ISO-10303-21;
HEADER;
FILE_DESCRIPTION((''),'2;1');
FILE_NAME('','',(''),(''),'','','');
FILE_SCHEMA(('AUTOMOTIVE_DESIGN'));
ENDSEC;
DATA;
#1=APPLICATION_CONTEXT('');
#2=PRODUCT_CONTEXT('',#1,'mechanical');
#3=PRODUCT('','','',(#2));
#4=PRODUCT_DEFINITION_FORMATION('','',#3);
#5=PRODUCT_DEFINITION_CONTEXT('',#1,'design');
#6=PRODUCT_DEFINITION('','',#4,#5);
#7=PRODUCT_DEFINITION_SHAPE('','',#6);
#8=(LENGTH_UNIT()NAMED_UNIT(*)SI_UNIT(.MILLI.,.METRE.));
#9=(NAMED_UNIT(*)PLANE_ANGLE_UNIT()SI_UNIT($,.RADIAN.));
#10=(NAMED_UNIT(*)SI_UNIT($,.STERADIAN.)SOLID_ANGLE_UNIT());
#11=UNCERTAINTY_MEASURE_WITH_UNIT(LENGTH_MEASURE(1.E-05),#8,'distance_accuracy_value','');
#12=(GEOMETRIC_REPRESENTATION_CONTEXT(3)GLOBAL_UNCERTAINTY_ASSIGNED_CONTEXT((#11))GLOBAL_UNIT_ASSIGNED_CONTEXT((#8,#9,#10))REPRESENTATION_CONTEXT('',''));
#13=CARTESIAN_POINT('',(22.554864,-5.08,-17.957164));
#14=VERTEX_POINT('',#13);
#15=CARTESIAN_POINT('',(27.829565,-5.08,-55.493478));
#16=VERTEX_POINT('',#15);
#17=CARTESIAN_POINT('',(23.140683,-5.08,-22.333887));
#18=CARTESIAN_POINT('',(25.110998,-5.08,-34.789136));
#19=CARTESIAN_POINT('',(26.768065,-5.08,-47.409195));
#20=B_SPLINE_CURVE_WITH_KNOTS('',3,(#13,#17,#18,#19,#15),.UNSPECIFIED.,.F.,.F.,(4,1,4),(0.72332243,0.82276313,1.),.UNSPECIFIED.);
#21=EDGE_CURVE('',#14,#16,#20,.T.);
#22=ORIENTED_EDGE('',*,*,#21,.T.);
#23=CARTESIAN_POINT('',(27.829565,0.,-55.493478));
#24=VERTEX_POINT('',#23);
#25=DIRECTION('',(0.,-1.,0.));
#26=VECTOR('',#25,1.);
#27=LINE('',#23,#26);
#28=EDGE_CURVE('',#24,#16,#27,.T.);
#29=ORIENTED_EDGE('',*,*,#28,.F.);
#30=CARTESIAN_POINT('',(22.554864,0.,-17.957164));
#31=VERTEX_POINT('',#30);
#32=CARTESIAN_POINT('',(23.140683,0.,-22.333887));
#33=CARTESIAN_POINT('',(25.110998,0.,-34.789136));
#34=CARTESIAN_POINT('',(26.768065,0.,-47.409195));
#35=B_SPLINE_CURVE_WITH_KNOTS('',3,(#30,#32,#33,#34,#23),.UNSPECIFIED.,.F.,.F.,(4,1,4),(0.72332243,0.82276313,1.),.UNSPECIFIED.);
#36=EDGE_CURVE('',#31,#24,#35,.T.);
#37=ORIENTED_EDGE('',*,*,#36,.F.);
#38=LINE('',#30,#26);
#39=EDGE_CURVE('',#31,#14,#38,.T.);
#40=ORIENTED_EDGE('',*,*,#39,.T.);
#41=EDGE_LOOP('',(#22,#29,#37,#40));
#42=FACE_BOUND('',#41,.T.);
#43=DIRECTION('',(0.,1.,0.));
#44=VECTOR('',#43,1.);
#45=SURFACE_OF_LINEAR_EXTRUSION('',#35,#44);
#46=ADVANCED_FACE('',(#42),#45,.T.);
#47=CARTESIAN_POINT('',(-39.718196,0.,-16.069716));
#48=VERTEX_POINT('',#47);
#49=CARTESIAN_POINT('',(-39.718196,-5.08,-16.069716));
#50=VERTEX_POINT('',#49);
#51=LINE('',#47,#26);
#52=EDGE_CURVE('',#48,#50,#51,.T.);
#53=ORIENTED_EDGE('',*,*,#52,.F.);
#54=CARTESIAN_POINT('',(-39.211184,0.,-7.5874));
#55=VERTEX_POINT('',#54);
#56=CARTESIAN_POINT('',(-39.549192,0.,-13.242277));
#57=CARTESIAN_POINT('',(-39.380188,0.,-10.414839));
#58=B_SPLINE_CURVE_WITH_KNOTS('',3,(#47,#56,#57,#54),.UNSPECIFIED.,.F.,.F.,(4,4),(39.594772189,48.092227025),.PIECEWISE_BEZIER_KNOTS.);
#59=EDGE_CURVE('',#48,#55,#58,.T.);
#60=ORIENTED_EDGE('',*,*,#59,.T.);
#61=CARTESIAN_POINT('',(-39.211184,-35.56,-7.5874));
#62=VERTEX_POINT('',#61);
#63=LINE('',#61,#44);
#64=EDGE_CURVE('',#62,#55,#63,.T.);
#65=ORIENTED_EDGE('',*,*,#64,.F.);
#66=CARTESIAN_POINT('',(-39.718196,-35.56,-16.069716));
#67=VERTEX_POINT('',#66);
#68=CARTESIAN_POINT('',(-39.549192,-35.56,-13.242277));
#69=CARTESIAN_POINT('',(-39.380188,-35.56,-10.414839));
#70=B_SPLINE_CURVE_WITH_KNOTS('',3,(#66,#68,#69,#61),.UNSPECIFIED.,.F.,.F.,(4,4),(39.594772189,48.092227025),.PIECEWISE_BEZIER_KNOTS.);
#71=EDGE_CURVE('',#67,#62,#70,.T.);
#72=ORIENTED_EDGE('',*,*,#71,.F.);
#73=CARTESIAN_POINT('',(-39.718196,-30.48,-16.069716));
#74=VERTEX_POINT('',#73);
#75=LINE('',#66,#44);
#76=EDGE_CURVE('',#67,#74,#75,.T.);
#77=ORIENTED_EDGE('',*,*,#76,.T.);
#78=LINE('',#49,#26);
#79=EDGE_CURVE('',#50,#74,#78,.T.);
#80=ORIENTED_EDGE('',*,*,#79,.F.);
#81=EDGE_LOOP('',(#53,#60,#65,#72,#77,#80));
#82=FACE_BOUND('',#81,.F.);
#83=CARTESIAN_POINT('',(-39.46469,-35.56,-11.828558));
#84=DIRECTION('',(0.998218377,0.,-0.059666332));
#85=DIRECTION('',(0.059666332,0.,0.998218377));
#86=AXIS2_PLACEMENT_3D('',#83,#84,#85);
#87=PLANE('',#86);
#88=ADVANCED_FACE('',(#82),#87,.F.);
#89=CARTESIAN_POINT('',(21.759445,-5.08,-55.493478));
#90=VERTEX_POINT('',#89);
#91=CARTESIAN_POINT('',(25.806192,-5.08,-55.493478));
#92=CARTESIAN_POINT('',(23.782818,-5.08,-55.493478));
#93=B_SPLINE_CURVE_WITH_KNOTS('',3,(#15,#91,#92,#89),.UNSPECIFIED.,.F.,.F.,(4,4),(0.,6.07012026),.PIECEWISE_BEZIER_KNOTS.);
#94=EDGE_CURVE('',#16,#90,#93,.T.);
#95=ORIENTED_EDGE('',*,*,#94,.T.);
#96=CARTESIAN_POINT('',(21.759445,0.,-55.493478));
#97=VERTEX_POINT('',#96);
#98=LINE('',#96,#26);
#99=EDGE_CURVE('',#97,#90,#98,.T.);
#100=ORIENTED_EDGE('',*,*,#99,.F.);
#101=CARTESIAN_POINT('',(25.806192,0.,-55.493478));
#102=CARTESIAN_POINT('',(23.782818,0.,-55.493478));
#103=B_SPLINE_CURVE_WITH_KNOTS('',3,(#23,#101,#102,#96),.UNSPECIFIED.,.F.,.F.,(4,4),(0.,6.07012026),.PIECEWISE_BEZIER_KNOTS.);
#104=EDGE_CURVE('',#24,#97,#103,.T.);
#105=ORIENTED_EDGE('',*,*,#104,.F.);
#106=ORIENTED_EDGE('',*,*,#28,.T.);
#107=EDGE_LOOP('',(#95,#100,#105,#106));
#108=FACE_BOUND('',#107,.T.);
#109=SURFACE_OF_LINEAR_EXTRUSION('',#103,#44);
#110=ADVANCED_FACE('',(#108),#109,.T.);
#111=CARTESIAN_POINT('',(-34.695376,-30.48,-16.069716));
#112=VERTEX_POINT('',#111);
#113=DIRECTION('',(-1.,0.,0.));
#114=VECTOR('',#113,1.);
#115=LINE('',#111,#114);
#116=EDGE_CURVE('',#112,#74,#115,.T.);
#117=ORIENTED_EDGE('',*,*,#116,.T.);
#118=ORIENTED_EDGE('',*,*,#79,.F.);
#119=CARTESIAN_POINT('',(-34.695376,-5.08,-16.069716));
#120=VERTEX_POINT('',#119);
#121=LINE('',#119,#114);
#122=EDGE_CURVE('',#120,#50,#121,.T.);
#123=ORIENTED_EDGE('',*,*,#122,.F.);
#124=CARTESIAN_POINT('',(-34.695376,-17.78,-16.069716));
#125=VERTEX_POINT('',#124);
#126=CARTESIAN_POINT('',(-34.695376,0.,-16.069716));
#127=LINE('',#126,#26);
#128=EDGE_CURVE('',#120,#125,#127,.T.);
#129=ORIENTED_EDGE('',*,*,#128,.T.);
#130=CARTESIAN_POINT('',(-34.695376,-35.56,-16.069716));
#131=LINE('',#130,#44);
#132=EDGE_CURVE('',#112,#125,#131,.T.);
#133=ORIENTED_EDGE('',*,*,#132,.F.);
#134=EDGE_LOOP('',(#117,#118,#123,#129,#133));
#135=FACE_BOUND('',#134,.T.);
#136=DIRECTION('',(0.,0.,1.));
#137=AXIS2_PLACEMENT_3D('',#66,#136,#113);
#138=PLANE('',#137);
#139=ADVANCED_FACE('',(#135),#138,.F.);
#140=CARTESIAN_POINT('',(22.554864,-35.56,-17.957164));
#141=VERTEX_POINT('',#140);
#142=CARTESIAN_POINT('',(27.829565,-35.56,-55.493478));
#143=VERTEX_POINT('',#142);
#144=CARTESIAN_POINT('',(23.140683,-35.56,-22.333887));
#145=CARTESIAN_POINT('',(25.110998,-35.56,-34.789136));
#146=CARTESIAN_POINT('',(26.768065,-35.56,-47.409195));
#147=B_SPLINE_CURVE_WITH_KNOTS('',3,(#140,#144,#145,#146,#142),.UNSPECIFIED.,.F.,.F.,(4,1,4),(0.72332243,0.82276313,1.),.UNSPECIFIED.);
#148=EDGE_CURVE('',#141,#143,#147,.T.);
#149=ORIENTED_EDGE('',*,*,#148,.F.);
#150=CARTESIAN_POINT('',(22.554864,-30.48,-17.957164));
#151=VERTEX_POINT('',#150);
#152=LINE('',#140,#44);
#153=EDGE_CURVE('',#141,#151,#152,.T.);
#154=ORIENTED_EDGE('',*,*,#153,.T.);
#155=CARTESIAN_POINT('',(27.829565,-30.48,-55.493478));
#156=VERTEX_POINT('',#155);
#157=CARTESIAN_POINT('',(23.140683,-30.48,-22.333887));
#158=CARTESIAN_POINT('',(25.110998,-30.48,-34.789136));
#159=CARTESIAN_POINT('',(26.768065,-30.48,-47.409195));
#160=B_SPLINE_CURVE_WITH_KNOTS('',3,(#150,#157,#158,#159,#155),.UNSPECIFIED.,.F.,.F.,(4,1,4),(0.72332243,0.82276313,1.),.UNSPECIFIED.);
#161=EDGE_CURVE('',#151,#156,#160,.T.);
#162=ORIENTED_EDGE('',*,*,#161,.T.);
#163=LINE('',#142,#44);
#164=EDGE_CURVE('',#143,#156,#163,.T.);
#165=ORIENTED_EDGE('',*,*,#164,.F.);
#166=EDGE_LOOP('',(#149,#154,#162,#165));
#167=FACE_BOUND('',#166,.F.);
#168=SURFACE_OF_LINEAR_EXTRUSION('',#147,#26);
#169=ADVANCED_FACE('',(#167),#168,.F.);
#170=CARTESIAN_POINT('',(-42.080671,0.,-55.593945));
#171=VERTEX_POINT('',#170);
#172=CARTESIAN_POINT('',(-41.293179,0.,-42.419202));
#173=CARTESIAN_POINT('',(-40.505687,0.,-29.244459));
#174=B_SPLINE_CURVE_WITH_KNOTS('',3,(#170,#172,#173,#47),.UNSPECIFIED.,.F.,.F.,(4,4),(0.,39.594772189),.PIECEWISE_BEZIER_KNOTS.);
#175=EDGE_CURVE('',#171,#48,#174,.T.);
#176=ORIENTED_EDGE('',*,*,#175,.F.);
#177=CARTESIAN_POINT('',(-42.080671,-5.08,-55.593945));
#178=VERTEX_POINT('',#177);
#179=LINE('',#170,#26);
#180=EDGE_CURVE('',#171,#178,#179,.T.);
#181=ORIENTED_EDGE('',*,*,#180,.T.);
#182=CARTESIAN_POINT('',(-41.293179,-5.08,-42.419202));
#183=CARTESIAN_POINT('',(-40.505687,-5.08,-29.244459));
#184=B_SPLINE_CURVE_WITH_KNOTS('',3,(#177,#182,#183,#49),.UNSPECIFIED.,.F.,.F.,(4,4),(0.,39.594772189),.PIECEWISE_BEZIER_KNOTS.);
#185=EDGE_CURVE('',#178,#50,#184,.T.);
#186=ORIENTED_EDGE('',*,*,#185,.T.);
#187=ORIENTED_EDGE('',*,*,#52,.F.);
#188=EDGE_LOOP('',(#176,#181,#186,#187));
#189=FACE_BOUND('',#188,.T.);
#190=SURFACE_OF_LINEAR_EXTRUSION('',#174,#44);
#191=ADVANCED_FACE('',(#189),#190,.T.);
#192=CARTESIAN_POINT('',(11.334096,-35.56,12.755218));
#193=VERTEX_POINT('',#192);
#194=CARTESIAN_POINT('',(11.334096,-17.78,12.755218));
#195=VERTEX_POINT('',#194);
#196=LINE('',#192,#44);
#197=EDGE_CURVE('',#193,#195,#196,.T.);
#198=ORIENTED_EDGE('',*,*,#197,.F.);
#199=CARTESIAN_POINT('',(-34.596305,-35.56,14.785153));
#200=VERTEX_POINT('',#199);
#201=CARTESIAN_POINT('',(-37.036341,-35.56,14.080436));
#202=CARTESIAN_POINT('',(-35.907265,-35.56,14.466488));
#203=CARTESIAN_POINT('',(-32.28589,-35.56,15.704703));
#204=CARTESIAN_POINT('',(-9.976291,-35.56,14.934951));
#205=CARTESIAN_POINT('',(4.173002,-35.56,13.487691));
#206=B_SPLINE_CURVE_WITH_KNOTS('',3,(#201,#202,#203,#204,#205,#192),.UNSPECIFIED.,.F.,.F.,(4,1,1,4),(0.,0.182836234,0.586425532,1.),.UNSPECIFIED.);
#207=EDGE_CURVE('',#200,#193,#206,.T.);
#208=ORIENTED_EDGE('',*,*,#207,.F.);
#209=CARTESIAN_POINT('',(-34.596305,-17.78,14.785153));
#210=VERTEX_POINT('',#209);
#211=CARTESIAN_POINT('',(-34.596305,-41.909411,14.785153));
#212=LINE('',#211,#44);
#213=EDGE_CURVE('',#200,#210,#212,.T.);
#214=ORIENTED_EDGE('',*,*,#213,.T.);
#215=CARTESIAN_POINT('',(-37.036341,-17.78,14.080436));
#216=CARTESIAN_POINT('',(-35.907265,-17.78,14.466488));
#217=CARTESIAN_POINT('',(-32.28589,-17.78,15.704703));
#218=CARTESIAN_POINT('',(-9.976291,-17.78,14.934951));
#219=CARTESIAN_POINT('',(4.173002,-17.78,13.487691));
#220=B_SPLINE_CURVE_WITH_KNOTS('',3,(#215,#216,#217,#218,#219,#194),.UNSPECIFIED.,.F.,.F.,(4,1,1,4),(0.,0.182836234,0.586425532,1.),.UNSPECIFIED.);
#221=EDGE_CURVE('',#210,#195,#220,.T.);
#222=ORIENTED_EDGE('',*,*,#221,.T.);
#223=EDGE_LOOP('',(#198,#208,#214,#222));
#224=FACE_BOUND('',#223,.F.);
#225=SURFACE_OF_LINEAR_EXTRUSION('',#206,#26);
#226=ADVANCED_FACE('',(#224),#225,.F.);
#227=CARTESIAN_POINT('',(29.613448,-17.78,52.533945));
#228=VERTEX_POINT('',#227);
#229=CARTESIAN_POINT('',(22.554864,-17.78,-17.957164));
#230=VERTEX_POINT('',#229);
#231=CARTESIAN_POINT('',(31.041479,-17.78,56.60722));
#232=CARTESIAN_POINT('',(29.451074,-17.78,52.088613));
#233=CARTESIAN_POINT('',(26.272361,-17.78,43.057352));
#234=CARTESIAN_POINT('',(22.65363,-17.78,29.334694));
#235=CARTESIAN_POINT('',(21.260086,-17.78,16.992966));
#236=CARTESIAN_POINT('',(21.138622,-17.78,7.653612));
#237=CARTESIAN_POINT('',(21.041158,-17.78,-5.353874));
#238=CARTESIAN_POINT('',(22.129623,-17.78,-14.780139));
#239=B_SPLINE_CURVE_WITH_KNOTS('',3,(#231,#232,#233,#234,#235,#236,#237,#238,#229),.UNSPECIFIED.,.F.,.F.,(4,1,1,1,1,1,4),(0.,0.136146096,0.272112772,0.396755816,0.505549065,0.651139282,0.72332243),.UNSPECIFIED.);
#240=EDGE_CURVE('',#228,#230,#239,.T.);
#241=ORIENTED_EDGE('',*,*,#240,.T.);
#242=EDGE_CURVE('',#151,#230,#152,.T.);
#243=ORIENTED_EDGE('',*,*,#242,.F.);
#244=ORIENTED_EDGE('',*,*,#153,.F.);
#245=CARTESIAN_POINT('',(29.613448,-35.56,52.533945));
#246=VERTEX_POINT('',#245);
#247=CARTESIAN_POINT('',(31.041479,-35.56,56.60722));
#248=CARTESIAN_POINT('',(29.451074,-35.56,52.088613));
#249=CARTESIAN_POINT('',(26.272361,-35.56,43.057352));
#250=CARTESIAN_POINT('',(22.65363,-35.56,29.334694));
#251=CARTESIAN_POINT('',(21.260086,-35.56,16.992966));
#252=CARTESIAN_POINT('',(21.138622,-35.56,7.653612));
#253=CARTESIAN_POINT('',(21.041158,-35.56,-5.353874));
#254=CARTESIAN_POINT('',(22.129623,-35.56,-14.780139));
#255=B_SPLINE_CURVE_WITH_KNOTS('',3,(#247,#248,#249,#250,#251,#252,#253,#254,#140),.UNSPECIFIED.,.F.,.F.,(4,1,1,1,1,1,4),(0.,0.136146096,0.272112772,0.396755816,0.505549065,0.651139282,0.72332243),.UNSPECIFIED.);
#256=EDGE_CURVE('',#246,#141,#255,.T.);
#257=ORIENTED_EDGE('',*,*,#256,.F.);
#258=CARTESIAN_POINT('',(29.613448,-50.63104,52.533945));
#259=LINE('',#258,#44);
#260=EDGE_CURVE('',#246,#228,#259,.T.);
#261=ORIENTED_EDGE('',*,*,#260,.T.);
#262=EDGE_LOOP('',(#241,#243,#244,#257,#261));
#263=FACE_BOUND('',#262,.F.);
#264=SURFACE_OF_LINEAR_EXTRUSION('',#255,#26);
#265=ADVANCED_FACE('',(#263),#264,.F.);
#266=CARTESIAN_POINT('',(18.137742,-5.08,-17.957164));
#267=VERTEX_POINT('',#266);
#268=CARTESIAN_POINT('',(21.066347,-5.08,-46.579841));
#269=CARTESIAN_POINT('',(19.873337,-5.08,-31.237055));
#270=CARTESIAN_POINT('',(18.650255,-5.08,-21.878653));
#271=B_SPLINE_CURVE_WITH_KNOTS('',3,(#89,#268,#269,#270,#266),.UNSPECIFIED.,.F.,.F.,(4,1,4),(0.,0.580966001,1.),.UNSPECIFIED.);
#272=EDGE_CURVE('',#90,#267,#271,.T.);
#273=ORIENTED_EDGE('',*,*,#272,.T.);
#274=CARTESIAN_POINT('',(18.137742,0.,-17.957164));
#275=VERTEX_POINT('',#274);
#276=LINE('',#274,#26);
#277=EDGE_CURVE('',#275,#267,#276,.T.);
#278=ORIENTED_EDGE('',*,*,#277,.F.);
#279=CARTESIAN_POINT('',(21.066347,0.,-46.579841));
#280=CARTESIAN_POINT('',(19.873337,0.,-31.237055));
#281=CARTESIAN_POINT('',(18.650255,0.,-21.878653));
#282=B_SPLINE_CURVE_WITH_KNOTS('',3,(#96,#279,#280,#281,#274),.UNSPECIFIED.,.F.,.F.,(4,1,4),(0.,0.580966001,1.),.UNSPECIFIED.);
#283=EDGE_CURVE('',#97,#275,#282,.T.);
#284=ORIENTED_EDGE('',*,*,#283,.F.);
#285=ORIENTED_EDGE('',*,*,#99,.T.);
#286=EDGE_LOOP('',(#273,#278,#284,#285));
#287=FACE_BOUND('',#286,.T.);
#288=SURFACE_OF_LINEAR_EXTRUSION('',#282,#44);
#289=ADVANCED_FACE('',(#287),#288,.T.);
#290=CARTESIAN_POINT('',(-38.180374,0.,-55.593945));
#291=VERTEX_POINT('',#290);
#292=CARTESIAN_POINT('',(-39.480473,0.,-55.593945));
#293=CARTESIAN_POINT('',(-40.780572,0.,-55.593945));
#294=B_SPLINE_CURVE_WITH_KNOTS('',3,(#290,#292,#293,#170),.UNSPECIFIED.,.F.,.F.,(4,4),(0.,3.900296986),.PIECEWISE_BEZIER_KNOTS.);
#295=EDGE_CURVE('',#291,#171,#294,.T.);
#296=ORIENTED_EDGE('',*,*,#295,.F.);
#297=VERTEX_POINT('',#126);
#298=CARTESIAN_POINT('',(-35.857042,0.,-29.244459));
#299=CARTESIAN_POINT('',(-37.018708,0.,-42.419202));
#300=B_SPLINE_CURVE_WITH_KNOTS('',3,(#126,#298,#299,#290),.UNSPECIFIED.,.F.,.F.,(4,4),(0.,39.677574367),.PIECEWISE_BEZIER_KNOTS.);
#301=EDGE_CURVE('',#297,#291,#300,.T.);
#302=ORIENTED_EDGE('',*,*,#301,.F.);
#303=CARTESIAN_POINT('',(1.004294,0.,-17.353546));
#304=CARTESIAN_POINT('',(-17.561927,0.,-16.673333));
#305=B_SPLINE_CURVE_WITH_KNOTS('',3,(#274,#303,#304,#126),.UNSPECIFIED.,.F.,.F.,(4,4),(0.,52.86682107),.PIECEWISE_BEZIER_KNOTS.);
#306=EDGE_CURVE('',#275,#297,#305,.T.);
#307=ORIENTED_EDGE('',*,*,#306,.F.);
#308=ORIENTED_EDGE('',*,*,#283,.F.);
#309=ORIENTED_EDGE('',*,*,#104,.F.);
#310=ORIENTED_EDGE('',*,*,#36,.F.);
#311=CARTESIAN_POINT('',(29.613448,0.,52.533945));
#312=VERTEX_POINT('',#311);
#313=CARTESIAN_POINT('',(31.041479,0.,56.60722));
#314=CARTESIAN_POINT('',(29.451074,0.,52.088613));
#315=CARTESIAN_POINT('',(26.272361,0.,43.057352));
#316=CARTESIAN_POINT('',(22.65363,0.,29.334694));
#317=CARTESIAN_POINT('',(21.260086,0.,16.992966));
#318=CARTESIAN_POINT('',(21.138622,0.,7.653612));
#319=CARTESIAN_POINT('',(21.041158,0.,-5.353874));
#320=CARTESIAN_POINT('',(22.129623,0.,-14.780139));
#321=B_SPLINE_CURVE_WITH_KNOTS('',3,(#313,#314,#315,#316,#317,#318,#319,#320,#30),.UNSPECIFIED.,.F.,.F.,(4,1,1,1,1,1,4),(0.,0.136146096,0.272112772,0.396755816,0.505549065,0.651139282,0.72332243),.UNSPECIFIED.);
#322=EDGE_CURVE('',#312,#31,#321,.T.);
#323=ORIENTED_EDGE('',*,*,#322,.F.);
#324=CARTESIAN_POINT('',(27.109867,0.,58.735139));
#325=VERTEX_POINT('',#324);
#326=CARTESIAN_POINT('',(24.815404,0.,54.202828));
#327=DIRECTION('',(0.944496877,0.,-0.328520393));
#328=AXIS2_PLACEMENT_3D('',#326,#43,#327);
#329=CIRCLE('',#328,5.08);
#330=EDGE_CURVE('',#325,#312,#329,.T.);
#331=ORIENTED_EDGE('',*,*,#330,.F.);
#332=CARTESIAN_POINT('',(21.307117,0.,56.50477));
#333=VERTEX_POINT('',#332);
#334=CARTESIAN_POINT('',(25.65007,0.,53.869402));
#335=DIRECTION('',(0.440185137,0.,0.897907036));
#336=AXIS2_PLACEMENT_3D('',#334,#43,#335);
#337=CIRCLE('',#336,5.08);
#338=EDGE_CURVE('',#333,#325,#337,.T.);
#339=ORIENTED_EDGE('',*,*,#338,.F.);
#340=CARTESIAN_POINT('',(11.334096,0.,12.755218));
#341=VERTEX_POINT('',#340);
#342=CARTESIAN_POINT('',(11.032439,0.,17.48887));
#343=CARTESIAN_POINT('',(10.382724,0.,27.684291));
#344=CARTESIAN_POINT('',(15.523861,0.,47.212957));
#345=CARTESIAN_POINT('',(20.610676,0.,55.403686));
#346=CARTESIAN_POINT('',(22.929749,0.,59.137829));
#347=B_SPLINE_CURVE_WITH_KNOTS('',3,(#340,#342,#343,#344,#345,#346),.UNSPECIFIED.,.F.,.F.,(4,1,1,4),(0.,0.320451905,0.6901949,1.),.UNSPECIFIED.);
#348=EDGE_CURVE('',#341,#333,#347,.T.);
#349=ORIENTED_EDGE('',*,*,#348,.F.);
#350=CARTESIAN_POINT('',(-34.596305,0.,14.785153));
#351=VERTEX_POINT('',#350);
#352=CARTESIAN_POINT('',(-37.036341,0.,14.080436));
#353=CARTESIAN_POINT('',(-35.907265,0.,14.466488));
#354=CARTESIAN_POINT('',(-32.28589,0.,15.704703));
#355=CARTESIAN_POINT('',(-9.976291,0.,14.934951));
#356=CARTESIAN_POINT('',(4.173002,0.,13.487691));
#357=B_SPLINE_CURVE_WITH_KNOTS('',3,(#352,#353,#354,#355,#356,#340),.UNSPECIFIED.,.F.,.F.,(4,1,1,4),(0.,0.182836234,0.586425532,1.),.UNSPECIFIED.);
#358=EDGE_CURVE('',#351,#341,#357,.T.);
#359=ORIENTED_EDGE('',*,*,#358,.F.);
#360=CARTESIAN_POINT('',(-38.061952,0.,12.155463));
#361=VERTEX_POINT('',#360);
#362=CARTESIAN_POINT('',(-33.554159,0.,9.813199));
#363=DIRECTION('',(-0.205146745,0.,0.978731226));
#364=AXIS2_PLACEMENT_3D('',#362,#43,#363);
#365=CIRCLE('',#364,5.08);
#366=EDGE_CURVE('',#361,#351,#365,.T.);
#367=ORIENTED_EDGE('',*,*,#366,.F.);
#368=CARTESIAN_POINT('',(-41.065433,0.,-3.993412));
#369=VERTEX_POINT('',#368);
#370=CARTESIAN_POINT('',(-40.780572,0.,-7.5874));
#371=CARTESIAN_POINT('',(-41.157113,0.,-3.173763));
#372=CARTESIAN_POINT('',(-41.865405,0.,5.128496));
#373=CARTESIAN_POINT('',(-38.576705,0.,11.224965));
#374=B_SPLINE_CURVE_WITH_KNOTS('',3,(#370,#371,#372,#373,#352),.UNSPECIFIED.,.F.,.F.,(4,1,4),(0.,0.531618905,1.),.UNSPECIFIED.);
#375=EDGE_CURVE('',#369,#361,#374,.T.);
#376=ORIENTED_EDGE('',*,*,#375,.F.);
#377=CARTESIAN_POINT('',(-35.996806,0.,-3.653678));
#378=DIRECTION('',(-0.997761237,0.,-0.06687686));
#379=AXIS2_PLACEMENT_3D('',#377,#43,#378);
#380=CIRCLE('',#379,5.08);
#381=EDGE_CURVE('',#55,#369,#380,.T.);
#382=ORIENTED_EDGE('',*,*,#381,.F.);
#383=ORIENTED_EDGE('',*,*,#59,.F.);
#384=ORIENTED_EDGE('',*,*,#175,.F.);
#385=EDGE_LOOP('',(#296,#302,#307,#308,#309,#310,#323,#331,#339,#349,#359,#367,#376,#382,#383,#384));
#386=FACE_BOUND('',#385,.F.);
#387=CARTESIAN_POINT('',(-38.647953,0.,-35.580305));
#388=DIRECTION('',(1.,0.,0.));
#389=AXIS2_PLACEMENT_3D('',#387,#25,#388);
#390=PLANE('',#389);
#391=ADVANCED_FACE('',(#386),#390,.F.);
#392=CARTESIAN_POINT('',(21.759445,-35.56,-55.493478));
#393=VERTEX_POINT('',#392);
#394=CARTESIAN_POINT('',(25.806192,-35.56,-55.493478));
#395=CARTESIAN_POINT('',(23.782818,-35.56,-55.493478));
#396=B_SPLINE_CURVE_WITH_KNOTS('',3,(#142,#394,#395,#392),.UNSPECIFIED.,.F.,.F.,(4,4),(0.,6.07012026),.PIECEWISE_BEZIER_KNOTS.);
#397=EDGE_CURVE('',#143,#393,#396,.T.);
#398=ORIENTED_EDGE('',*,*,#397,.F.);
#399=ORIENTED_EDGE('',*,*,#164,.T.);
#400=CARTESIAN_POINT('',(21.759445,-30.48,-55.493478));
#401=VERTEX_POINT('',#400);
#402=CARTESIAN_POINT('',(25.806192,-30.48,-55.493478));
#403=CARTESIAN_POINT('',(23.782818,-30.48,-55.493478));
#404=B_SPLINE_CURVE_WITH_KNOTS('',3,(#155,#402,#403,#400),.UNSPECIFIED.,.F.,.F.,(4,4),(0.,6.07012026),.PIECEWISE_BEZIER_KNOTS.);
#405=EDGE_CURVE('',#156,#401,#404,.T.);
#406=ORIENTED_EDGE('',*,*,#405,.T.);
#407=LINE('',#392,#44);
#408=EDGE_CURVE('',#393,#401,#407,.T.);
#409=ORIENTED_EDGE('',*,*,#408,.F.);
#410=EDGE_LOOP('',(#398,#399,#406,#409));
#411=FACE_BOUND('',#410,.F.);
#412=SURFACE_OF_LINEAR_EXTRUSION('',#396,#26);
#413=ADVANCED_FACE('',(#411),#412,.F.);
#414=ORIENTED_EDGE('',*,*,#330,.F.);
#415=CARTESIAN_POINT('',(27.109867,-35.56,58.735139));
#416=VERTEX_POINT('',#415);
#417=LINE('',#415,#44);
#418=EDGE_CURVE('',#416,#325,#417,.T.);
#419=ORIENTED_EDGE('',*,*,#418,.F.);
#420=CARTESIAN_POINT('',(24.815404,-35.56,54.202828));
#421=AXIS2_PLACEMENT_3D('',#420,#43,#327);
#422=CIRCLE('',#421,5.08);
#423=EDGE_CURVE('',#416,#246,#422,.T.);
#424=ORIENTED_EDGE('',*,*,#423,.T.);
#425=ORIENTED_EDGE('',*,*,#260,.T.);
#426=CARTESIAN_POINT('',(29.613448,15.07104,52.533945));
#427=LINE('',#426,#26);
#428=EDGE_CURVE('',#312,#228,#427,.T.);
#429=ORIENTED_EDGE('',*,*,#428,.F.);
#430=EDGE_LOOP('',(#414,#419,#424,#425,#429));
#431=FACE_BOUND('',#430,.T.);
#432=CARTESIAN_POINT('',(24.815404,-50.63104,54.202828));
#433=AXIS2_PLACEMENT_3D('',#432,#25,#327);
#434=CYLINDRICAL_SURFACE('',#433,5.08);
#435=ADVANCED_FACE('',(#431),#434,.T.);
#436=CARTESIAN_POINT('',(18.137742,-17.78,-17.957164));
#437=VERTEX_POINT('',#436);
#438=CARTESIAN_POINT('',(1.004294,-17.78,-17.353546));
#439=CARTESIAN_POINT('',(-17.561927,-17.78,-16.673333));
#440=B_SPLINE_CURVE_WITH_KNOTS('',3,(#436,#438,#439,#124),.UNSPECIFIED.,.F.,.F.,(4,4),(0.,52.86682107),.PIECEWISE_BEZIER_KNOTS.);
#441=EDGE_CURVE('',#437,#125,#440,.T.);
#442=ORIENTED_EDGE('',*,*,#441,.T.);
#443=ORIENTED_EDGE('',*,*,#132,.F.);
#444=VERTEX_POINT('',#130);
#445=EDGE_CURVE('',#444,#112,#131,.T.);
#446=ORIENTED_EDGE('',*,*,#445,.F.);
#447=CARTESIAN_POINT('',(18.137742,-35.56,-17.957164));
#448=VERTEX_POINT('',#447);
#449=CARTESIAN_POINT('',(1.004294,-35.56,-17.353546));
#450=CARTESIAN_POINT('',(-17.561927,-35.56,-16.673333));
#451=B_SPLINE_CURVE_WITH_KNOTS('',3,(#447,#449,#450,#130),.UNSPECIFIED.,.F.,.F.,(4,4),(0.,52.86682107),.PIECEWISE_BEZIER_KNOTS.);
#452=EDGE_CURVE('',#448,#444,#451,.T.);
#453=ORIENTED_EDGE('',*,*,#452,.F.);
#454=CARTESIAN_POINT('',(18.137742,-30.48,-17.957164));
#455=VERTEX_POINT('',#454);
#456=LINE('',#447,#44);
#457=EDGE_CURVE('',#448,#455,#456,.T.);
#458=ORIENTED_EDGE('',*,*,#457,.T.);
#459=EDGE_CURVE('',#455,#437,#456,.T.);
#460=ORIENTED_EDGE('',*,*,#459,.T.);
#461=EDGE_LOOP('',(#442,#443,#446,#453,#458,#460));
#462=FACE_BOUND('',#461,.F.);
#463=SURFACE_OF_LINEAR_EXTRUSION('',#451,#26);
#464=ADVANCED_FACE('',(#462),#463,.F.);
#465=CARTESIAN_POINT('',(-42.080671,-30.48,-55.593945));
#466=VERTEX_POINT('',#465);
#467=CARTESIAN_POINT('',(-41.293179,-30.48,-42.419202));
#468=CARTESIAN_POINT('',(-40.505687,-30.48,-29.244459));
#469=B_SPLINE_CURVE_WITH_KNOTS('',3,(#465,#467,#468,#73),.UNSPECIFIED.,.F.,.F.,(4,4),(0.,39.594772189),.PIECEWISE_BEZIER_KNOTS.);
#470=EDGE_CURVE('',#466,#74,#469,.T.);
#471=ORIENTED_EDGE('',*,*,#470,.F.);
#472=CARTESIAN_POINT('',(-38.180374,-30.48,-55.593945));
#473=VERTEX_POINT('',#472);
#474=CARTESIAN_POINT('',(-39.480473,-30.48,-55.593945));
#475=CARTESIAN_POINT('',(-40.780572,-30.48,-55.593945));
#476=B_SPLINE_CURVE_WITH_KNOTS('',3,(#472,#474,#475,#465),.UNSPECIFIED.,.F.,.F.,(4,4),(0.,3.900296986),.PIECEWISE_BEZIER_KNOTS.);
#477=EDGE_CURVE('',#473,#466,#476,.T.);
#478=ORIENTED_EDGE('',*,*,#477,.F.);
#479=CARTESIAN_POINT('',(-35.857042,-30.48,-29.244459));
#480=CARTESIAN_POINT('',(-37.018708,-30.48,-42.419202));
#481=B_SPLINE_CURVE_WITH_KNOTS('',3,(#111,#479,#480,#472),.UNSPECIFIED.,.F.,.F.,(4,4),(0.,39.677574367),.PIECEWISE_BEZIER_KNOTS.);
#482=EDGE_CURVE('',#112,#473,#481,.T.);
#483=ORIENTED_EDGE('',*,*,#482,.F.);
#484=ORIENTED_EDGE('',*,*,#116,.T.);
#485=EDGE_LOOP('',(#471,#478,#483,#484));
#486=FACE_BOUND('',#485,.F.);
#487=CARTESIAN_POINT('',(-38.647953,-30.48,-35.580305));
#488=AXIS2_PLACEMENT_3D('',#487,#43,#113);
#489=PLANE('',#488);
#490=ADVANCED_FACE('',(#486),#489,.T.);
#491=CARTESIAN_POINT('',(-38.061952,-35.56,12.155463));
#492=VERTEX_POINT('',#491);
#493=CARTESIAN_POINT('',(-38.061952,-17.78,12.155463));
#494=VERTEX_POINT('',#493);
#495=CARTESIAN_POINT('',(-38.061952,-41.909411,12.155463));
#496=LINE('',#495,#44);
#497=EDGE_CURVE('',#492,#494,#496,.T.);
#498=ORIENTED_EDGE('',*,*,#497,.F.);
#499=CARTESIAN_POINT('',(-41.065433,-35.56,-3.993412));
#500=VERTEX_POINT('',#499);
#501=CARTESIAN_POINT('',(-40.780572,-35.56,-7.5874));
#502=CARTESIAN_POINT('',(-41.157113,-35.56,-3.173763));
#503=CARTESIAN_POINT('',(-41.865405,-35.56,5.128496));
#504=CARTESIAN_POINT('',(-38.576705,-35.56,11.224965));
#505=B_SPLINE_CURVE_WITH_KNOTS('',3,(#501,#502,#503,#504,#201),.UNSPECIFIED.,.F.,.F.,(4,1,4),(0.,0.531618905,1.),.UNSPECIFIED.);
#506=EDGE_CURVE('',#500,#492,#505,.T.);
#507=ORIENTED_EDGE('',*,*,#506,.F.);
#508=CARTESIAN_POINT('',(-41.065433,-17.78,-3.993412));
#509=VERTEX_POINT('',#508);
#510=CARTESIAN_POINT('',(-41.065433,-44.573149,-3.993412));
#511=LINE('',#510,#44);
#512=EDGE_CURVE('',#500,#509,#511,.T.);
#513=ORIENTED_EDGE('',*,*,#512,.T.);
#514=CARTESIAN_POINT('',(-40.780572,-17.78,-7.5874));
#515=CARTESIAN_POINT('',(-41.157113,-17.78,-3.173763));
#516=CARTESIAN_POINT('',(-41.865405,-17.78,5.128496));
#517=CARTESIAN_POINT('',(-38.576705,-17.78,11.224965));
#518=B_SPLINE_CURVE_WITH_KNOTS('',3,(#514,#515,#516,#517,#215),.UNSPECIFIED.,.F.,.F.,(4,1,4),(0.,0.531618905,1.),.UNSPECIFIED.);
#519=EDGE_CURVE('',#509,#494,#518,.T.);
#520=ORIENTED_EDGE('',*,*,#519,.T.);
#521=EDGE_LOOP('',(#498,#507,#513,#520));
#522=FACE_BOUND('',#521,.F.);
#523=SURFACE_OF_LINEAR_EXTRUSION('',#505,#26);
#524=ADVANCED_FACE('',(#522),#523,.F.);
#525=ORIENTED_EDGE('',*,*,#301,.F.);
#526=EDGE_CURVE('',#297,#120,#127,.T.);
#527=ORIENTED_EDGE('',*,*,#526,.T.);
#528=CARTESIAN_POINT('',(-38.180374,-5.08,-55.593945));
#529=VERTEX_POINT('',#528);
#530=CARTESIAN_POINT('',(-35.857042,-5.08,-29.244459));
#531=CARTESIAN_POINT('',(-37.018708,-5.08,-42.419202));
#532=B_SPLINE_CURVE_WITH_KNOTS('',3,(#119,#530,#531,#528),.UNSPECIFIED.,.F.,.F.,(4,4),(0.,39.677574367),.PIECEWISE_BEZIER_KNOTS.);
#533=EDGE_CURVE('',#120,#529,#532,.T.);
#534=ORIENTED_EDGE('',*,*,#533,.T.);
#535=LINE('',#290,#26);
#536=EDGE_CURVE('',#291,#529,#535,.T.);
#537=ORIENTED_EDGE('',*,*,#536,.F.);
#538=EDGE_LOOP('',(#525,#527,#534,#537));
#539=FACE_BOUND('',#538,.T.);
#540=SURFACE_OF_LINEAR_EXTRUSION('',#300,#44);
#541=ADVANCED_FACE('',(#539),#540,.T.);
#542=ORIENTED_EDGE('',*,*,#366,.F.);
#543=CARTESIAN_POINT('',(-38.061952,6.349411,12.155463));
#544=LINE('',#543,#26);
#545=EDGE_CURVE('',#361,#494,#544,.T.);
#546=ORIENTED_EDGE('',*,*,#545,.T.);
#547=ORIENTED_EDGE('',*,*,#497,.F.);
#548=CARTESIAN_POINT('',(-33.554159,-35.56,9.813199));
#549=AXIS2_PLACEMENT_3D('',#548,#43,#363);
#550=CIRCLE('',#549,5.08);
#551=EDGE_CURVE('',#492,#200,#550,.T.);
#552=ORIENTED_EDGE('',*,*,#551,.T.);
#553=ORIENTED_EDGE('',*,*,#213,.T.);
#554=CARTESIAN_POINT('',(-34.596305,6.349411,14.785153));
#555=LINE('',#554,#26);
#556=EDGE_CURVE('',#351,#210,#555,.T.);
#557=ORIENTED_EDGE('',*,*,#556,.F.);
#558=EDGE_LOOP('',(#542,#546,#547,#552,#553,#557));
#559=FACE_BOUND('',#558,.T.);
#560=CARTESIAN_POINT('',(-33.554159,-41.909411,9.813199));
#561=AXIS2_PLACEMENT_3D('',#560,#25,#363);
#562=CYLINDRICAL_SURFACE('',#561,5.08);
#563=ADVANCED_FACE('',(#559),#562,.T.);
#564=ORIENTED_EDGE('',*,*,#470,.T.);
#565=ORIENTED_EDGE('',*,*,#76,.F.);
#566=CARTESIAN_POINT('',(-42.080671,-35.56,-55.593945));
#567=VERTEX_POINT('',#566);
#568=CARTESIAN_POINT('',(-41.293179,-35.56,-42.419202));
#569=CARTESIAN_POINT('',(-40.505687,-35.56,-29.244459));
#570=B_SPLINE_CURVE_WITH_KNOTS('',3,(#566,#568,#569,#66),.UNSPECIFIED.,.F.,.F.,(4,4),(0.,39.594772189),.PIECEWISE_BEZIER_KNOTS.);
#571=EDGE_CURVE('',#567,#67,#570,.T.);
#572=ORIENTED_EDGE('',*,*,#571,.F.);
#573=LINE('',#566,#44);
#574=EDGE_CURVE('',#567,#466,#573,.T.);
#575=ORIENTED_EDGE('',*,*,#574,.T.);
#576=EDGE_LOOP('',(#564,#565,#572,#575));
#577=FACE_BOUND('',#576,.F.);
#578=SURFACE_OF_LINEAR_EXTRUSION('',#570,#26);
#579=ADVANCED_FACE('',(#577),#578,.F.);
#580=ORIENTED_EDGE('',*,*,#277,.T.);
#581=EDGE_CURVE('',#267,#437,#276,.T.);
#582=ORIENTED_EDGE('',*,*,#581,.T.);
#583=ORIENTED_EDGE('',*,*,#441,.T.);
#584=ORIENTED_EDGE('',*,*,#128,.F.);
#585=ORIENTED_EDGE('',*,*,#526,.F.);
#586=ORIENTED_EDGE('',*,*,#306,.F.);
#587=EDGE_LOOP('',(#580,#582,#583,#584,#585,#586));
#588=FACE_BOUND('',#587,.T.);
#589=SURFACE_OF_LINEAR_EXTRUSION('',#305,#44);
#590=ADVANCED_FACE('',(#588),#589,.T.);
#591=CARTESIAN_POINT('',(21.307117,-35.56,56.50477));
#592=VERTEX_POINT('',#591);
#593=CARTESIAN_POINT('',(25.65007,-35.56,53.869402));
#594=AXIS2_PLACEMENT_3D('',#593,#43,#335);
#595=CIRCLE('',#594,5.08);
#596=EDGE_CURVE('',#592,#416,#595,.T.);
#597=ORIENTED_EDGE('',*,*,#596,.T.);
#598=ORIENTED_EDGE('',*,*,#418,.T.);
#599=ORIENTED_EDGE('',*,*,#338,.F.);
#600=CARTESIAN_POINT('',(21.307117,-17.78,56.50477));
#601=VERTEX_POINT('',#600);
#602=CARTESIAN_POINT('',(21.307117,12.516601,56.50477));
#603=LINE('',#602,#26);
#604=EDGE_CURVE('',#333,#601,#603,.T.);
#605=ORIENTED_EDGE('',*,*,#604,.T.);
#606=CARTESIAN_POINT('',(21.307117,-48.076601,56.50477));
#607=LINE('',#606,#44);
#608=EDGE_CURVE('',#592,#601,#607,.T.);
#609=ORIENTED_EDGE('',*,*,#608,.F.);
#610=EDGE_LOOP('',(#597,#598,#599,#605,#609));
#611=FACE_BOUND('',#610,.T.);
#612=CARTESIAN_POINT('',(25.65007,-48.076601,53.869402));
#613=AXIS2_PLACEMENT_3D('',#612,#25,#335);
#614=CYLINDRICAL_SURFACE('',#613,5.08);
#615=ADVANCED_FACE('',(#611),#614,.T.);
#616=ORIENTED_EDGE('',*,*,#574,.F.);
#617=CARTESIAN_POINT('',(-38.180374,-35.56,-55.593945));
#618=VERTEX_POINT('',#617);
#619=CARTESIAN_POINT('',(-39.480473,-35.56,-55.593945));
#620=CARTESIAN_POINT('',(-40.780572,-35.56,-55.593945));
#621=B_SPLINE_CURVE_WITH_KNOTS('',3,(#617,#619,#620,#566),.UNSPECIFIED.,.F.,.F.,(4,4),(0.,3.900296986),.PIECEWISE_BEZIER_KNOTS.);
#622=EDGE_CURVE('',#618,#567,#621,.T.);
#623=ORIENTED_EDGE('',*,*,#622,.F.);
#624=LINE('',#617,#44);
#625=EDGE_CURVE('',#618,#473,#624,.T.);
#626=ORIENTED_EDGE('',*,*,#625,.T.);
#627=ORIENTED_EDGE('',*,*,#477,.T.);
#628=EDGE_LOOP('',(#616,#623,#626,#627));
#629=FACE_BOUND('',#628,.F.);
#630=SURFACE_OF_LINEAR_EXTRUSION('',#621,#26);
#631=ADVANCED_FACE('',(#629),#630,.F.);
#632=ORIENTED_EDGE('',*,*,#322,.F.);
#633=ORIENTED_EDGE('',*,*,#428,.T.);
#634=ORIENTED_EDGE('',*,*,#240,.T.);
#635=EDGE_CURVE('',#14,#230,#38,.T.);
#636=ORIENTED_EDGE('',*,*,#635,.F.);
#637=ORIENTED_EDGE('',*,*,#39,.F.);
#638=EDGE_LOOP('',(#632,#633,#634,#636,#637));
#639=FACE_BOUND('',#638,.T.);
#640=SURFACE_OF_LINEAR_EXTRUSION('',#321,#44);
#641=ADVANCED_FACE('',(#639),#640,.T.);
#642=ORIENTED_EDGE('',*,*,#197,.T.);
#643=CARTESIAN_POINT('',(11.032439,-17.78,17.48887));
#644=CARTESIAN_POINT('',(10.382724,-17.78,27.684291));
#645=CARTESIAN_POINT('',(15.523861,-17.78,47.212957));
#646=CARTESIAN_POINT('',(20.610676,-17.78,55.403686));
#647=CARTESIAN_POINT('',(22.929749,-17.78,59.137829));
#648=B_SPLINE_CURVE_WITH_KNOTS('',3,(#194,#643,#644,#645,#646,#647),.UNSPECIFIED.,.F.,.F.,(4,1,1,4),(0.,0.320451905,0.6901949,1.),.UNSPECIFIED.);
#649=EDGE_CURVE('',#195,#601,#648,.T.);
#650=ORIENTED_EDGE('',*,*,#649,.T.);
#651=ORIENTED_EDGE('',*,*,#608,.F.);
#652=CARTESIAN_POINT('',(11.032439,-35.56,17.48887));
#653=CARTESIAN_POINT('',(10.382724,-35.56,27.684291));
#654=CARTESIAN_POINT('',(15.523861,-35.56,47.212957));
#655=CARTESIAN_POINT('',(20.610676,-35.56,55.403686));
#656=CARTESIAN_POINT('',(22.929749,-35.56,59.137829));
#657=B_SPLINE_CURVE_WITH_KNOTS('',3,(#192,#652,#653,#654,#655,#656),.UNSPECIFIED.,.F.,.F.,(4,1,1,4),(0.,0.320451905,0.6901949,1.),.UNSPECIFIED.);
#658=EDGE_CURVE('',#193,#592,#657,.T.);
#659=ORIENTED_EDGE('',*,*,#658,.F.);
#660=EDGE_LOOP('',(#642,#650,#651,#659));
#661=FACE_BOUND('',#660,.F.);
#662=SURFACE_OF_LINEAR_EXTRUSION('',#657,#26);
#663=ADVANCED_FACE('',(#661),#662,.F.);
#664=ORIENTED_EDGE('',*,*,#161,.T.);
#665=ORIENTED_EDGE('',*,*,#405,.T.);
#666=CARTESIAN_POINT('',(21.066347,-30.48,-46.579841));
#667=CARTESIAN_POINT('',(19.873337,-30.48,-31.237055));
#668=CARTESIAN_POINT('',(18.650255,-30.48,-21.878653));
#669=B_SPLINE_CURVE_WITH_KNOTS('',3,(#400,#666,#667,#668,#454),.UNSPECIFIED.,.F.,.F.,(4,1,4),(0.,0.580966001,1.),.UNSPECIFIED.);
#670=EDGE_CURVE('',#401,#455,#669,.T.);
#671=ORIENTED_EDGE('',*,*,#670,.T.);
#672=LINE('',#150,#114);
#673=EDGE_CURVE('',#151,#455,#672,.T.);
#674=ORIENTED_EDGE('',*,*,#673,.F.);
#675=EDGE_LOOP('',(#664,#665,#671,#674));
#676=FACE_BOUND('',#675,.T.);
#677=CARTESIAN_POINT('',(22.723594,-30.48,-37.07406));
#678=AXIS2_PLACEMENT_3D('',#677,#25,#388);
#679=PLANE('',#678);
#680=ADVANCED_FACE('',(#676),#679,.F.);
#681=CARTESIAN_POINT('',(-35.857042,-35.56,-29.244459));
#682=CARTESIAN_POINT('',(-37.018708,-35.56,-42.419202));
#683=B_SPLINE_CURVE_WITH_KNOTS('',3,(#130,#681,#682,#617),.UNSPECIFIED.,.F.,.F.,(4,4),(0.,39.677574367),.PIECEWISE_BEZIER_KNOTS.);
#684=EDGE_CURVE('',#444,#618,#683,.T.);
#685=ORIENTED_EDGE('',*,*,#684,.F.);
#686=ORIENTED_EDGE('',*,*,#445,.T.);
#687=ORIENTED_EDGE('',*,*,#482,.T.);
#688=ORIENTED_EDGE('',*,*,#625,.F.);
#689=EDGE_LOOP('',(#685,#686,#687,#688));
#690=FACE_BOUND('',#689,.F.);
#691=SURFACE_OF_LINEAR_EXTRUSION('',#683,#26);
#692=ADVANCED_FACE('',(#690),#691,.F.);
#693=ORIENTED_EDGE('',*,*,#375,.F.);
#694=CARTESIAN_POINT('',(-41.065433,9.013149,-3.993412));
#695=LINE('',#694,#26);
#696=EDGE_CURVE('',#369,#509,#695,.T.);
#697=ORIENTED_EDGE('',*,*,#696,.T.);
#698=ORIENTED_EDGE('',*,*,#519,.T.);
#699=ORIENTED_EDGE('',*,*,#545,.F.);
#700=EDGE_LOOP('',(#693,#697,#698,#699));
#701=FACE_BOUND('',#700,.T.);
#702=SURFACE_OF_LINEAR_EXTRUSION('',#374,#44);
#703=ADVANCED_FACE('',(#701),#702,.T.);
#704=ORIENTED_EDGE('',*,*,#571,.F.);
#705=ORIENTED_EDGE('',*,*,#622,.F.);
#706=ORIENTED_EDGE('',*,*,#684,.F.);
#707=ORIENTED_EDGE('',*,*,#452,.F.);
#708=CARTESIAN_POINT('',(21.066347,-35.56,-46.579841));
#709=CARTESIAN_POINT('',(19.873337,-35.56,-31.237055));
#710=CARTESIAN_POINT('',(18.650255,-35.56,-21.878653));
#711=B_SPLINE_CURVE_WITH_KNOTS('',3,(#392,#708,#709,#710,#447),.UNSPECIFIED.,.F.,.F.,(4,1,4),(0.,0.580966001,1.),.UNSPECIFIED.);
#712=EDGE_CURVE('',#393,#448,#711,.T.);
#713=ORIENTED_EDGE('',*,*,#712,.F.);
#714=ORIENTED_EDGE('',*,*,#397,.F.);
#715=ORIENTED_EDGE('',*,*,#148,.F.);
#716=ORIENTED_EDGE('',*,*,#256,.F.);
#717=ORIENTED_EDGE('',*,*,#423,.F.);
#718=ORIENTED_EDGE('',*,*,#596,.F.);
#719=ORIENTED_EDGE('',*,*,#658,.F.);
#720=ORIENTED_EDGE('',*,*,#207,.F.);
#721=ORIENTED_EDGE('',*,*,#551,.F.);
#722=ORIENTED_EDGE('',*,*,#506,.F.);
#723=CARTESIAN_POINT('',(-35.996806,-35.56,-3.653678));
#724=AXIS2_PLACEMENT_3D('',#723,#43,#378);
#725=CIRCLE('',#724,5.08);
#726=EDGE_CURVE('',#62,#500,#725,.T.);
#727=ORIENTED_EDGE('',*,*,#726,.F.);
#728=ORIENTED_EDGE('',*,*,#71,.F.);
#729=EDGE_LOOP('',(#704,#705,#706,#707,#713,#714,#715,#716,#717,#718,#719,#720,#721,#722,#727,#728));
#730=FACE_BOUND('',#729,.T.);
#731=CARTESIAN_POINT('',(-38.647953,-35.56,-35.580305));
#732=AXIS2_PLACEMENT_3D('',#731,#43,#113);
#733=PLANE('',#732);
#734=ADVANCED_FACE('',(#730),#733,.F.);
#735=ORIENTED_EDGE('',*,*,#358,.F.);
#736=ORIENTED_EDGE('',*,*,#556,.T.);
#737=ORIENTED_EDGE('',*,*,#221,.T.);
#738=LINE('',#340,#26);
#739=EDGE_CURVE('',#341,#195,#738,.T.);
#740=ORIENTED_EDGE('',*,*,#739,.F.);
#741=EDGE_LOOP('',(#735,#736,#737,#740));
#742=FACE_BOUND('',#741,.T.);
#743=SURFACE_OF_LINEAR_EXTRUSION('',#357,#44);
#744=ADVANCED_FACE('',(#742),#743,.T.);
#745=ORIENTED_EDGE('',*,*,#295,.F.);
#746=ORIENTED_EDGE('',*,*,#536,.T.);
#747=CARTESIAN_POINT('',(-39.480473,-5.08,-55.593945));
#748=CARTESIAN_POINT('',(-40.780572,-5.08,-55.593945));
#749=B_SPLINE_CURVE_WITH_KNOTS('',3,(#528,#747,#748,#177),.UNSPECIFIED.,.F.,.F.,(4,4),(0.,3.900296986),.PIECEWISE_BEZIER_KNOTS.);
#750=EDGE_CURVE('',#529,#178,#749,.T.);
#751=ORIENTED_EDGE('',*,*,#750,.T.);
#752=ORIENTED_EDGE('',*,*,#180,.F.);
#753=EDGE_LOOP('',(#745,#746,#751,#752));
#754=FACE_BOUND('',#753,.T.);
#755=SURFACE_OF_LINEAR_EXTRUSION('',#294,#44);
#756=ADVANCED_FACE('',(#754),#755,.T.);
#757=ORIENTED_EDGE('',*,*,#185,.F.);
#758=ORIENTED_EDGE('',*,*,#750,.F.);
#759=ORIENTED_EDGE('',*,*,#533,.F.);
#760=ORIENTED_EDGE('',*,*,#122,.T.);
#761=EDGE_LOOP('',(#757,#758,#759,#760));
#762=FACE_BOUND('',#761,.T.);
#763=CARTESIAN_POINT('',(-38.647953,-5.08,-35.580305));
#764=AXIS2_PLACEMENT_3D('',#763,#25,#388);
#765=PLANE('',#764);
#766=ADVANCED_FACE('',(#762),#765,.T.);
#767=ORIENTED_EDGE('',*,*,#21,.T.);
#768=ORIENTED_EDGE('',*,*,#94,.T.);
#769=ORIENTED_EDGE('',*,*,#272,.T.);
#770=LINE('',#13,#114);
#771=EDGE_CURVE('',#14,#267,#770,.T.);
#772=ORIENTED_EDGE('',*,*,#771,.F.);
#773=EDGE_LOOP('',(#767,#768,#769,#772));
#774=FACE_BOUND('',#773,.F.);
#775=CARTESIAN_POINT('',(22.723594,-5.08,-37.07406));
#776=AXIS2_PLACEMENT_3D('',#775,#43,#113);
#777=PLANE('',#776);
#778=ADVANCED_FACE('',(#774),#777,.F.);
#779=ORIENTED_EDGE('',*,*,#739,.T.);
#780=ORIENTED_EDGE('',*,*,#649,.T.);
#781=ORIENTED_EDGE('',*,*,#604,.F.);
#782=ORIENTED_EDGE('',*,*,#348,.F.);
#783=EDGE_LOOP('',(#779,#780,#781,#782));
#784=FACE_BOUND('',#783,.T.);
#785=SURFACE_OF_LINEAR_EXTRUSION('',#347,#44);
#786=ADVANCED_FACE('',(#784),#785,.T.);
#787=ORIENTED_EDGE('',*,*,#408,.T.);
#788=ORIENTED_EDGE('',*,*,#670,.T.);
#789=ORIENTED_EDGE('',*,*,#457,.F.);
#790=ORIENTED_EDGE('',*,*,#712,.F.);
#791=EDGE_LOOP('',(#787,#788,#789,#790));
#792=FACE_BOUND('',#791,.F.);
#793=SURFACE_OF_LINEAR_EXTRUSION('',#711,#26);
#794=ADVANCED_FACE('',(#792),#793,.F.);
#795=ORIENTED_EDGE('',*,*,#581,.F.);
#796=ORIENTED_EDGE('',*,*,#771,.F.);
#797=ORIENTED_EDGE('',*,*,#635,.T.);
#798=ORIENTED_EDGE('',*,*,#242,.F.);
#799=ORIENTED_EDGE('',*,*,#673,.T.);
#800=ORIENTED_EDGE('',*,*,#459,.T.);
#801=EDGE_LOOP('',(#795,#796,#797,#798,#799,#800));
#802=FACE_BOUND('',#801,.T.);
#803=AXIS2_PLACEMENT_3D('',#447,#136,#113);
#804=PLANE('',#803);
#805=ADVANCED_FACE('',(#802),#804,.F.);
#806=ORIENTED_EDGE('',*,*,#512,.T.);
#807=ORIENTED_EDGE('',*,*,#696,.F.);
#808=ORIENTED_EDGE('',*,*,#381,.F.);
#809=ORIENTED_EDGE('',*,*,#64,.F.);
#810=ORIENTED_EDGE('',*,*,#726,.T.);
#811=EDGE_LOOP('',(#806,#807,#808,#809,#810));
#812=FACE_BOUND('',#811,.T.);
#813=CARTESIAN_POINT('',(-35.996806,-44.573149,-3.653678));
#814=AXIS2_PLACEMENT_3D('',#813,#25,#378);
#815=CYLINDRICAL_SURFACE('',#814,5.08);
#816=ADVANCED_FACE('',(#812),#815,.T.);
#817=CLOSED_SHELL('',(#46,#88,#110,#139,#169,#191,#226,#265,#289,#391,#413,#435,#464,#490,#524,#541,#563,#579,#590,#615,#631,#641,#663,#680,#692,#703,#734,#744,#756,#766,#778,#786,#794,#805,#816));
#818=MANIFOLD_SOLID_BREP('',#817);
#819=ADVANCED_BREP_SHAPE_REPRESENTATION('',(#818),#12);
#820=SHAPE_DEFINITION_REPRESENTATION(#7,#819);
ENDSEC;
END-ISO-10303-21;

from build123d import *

# Parameters (mm, degrees)
F1_DEPTH    = 17.78
F2_DEPTH    = 5.08
F3_T1_DEPTH = 35.8062984981
F3_T3_DEPTH = 30.4788212018
F3_T5_DEPTH = 42.8132024584
F3_T7_DEPTH = 47.9220802156


# Not quite as in the source:
# - a fillet or chamfer that OpenCascade refuses, or shapes differently, is made with other operations: its cross-section is extruded or revolved along the edge and cut away or added


with BuildPart() as f1:
    # F0 (on Front) → F1 (new body)
    with BuildSketch(Plane.XZ):
        with BuildLine():
            add(Edge.make_bspline(
                [(-37.0363406837, 14.0804359689), (-35.9072652533, 14.4664877028), (-32.2858897401, 15.7047028462), (-9.9762911381, 14.9349511241), (4.1730021841, 13.4876905203), (11.3340960816, 12.755217962)],
                knots=[0, 0, 0, 0, 0.1828362337, 0.5864255319, 1, 1, 1, 1], degree=3))
            add(Edge.make_bspline(
                [(-40.7805715998, -7.587400265), (-41.1571131004, -3.1737627482), (-41.8654052574, 5.1284956529), (-38.5767054854, 11.224964985), (-37.0363406837, 14.0804359689)],
                knots=[0, 0, 0, 0, 0.5316189046, 1, 1, 1, 1], degree=3))
            add(Edge.make_bspline(
                [(-39.2111837864, -7.587400265), (-39.7343130575, -7.587400265), (-40.2574423287, -7.587400265), (-40.7805715998, -7.587400265)],
                knots=[0, 0, 0, 0, 1.5693878134, 1.5693878134, 1.5693878134, 1.5693878134], degree=3))
            add(Edge.make_bspline(
                [(-39.7181957521, -16.0697158426), (-39.5491917635, -13.2422773167), (-39.380187775, -10.4148387909), (-39.2111837864, -7.587400265)],
                knots=[39.5947721886, 39.5947721886, 39.5947721886, 39.5947721886, 48.0922270247, 48.0922270247, 48.0922270247, 48.0922270247], degree=3))
            Line((-39.7181957521, -16.0697158426), (-34.6953757107, -16.0697158426))
            add(Edge.make_bspline(
                [(18.1377418348, -17.9571639745), (1.0042935619, -17.3535464951), (-17.5619274378, -16.673333322), (-34.6953757107, -16.0697158426)],
                knots=[0, 0, 0, 0, 52.8668210698, 52.8668210698, 52.8668210698, 52.8668210698], degree=3))
            Line((18.1377418348, -17.9571639745), (22.5548642091, -17.9571639745))
            add(Edge.make_bspline(
                [(31.0414787382, 56.6072203219), (29.451074184, 52.0886125693), (26.2723609904, 43.0573519115), (22.6536296154, 29.3346938321), (21.2600863367, 16.9929663306), (21.1386219291, 7.653611923), (21.0411584125, -5.3538743468), (22.1296230711, -14.7801385495), (22.5548642091, -17.9571639745)],
                knots=[0, 0, 0, 0, 0.1361460961, 0.2721127721, 0.3967558164, 0.5055490646, 0.651139282, 0.7233224297, 0.7233224297, 0.7233224297, 0.7233224297], degree=3))
            add(Edge.make_bspline(
                [(22.9297485203, 59.1378286481), (23.9176047114, 59.2712834835), (26.2358281174, 59.584464821), (29.2892185653, 57.692797983), (31.0414787382, 56.6072203219)],
                knots=[0, 0, 0, 0, 0.4261263986, 1, 1, 1, 1], degree=3))
            add(Edge.make_bspline(
                [(11.3340960816, 12.755217962), (11.0324387543, 17.4888695508), (10.3827239426, 27.6842908865), (15.5238608305, 47.2129566198), (20.6106760328, 55.4036857883), (22.9297485203, 59.1378286481)],
                knots=[0, 0, 0, 0, 0.3204519046, 0.6901949001, 1, 1, 1, 1], degree=3))
        make_face()
    extrude(amount=F1_DEPTH)

    # F0 (on Front) → F2 (join)
    with BuildSketch(Plane.XZ):
        with BuildLine():
            Line((-34.6953757107, -16.0697158426), (-39.7181957521, -16.0697158426))
            add(Edge.make_bspline(
                [(-42.0806705952, -55.593945086), (-41.2931789808, -42.4192020049), (-40.5056873665, -29.2444589237), (-39.7181957521, -16.0697158426)],
                knots=[0, 0, 0, 0, 39.5947721886, 39.5947721886, 39.5947721886, 39.5947721886], degree=3))
            add(Edge.make_bspline(
                [(-38.1803736091, -55.593945086), (-39.4804726044, -55.593945086), (-40.7805715998, -55.593945086), (-42.0806705952, -55.593945086)],
                knots=[0, 0, 0, 0, 3.9002969861, 3.9002969861, 3.9002969861, 3.9002969861], degree=3))
            add(Edge.make_bspline(
                [(-34.6953757107, -16.0697158426), (-35.8570416768, -29.2444589237), (-37.018707643, -42.4192020049), (-38.1803736091, -55.593945086)],
                knots=[0, 0, 0, 0, 39.6775743668, 39.6775743668, 39.6775743668, 39.6775743668], degree=3))
        make_face()
        with BuildLine():
            add(Edge.make_bspline(
                [(22.5548642091, -17.9571639745), (23.1406834486, -22.3338868554), (25.110997642, -34.7891360369), (26.7680646459, -47.4091949068), (27.8295651078, -55.4934777319)],
                knots=[0.7233224297, 0.7233224297, 0.7233224297, 0.7233224297, 0.8227631303, 1, 1, 1, 1], degree=3))
            Line((22.5548642091, -17.9571639745), (18.1377418348, -17.9571639745))
            add(Edge.make_bspline(
                [(21.7594448477, -55.4934777319), (21.0663466567, -46.5798409174), (19.8733367549, -31.2370552726), (18.6502547708, -21.8786527932), (18.1377418348, -17.9571639745)],
                knots=[0, 0, 0, 0, 0.5809660006, 1, 1, 1, 1], degree=3))
            add(Edge.make_bspline(
                [(27.8295651078, -55.4934777319), (25.8061916878, -55.4934777319), (23.7828182677, -55.4934777319), (21.7594448477, -55.4934777319)],
                knots=[0, 0, 0, 0, 6.0701202601, 6.0701202601, 6.0701202601, 6.0701202601], degree=3))
        make_face()
    extrude(amount=F2_DEPTH)

    # F3: fillet of radius 5.08 on 4 edges, made by hand

    # F3_s2 → F3_t1 (cut)
    with BuildSketch(Plane.XZ.offset(-9.0131492491)):
        with BuildLine():
            ThreePointArc((-41.0654329019, -3.9934120152), (-40.5113634996, -5.9828767727), (-39.2111837864, -7.587400265))
            Line((-39.2111837864, -7.587400265), (-39.2754713457, -7.666074719))
            ThreePointArc((-39.2754713457, -7.666074719), (-39.9958776931, -7.689000265), (-40.7805715998, -7.689000265))
            Line((-40.7805715998, -7.689000265), (-40.8818038663, -7.5960367127))
            ThreePointArc((-40.8818038663, -7.5960367127), (-41.0323979759, -5.7992458414), (-41.1668054436, -4.0002067042))
            Line((-41.1668054436, -4.0002067042), (-41.0654329019, -3.9934120152))
        make_face()
    extrude(amount=F3_T1_DEPTH, mode=Mode.SUBTRACT)

    # F3_s4 → F3_t3 (cut)
    with BuildSketch(Plane.XZ.offset(-6.3494106009)):
        with BuildLine():
            ThreePointArc((-34.5963046101, 14.7851531861), (-36.6248709598, 13.860065118), (-38.061951969, 12.1554632461))
            Line((-38.061951969, 12.1554632461), (-38.1521078254, 12.2023085399))
            ThreePointArc((-38.1521078254, 12.2023085399), (-37.6424780921, 13.1678308874), (-37.1257598745, 14.1286725558))
            Line((-37.1257598745, 14.1286725558), (-37.0692112747, 14.1765717284))
            ThreePointArc((-37.0692112747, 14.1765717284), (-35.8572472499, 14.5711412658), (-34.6171475194, 14.8845922787))
            Line((-34.6171475194, 14.8845922787), (-34.5963046101, 14.7851531861))
        make_face()
    extrude(amount=F3_T3_DEPTH, mode=Mode.SUBTRACT)

    # F3_s6 → F3_t5 (cut)
    with BuildSketch(Plane.XZ.offset(-12.5166012292)):
        with BuildLine():
            ThreePointArc((27.8862106757, 58.4307700125), (24.2228232961, 58.7447859797), (21.3071174751, 56.5047697552))
            Line((21.3071174751, 56.5047697552), (21.220258421, 56.5574771049))
            ThreePointArc((21.220258421, 56.5574771049), (22.0285709469, 57.8767827762), (22.8434388423, 59.1914308821))
            Line((22.8434388423, 59.1914308821), (22.9161463902, 59.2385140098))
            ThreePointArc((22.9161463902, 59.2385140098), (25.4817069799, 59.3415947788), (27.9309334856, 58.5219973674))
            Line((27.9309334856, 58.5219973674), (27.8862106757, 58.4307700125))
        make_face()
    extrude(amount=F3_T5_DEPTH, mode=Mode.SUBTRACT)

    # F3_s8 → F3_t7 (cut)
    with BuildSketch(Plane.XZ.offset(-15.0710401078)):
        with BuildLine():
            ThreePointArc((29.6134478053, 52.5339448765), (29.1735899714, 56.8129265835), (25.6089175294, 59.2204709225))
            Line((25.6089175294, 59.2204709225), (25.6247878066, 59.3208237715))
            ThreePointArc((25.6247878066, 59.3208237715), (28.4954140197, 58.2321967662), (31.0949864807, 56.6935886118))
            Line((31.0949864807, 56.6935886118), (31.1373157967, 56.5734887606))
            ThreePointArc((31.1373157967, 56.5734887606), (30.4214522449, 54.5375989985), (29.709408688, 52.5005672046))
            Line((29.709408688, 52.5005672046), (29.6134478053, 52.5339448765))
        make_face()
    extrude(amount=F3_T7_DEPTH, mode=Mode.SUBTRACT)

    # F5: F1 across plane


with BuildPart() as f1_1:
    add(f1.part)
    add(f1.part.mirror(Plane(origin=(-3.442122023, -17.78, 6.1004007624), x_dir=(1, 0, 0), z_dir=(0, -1, 0))))


solid = f1_1.part
